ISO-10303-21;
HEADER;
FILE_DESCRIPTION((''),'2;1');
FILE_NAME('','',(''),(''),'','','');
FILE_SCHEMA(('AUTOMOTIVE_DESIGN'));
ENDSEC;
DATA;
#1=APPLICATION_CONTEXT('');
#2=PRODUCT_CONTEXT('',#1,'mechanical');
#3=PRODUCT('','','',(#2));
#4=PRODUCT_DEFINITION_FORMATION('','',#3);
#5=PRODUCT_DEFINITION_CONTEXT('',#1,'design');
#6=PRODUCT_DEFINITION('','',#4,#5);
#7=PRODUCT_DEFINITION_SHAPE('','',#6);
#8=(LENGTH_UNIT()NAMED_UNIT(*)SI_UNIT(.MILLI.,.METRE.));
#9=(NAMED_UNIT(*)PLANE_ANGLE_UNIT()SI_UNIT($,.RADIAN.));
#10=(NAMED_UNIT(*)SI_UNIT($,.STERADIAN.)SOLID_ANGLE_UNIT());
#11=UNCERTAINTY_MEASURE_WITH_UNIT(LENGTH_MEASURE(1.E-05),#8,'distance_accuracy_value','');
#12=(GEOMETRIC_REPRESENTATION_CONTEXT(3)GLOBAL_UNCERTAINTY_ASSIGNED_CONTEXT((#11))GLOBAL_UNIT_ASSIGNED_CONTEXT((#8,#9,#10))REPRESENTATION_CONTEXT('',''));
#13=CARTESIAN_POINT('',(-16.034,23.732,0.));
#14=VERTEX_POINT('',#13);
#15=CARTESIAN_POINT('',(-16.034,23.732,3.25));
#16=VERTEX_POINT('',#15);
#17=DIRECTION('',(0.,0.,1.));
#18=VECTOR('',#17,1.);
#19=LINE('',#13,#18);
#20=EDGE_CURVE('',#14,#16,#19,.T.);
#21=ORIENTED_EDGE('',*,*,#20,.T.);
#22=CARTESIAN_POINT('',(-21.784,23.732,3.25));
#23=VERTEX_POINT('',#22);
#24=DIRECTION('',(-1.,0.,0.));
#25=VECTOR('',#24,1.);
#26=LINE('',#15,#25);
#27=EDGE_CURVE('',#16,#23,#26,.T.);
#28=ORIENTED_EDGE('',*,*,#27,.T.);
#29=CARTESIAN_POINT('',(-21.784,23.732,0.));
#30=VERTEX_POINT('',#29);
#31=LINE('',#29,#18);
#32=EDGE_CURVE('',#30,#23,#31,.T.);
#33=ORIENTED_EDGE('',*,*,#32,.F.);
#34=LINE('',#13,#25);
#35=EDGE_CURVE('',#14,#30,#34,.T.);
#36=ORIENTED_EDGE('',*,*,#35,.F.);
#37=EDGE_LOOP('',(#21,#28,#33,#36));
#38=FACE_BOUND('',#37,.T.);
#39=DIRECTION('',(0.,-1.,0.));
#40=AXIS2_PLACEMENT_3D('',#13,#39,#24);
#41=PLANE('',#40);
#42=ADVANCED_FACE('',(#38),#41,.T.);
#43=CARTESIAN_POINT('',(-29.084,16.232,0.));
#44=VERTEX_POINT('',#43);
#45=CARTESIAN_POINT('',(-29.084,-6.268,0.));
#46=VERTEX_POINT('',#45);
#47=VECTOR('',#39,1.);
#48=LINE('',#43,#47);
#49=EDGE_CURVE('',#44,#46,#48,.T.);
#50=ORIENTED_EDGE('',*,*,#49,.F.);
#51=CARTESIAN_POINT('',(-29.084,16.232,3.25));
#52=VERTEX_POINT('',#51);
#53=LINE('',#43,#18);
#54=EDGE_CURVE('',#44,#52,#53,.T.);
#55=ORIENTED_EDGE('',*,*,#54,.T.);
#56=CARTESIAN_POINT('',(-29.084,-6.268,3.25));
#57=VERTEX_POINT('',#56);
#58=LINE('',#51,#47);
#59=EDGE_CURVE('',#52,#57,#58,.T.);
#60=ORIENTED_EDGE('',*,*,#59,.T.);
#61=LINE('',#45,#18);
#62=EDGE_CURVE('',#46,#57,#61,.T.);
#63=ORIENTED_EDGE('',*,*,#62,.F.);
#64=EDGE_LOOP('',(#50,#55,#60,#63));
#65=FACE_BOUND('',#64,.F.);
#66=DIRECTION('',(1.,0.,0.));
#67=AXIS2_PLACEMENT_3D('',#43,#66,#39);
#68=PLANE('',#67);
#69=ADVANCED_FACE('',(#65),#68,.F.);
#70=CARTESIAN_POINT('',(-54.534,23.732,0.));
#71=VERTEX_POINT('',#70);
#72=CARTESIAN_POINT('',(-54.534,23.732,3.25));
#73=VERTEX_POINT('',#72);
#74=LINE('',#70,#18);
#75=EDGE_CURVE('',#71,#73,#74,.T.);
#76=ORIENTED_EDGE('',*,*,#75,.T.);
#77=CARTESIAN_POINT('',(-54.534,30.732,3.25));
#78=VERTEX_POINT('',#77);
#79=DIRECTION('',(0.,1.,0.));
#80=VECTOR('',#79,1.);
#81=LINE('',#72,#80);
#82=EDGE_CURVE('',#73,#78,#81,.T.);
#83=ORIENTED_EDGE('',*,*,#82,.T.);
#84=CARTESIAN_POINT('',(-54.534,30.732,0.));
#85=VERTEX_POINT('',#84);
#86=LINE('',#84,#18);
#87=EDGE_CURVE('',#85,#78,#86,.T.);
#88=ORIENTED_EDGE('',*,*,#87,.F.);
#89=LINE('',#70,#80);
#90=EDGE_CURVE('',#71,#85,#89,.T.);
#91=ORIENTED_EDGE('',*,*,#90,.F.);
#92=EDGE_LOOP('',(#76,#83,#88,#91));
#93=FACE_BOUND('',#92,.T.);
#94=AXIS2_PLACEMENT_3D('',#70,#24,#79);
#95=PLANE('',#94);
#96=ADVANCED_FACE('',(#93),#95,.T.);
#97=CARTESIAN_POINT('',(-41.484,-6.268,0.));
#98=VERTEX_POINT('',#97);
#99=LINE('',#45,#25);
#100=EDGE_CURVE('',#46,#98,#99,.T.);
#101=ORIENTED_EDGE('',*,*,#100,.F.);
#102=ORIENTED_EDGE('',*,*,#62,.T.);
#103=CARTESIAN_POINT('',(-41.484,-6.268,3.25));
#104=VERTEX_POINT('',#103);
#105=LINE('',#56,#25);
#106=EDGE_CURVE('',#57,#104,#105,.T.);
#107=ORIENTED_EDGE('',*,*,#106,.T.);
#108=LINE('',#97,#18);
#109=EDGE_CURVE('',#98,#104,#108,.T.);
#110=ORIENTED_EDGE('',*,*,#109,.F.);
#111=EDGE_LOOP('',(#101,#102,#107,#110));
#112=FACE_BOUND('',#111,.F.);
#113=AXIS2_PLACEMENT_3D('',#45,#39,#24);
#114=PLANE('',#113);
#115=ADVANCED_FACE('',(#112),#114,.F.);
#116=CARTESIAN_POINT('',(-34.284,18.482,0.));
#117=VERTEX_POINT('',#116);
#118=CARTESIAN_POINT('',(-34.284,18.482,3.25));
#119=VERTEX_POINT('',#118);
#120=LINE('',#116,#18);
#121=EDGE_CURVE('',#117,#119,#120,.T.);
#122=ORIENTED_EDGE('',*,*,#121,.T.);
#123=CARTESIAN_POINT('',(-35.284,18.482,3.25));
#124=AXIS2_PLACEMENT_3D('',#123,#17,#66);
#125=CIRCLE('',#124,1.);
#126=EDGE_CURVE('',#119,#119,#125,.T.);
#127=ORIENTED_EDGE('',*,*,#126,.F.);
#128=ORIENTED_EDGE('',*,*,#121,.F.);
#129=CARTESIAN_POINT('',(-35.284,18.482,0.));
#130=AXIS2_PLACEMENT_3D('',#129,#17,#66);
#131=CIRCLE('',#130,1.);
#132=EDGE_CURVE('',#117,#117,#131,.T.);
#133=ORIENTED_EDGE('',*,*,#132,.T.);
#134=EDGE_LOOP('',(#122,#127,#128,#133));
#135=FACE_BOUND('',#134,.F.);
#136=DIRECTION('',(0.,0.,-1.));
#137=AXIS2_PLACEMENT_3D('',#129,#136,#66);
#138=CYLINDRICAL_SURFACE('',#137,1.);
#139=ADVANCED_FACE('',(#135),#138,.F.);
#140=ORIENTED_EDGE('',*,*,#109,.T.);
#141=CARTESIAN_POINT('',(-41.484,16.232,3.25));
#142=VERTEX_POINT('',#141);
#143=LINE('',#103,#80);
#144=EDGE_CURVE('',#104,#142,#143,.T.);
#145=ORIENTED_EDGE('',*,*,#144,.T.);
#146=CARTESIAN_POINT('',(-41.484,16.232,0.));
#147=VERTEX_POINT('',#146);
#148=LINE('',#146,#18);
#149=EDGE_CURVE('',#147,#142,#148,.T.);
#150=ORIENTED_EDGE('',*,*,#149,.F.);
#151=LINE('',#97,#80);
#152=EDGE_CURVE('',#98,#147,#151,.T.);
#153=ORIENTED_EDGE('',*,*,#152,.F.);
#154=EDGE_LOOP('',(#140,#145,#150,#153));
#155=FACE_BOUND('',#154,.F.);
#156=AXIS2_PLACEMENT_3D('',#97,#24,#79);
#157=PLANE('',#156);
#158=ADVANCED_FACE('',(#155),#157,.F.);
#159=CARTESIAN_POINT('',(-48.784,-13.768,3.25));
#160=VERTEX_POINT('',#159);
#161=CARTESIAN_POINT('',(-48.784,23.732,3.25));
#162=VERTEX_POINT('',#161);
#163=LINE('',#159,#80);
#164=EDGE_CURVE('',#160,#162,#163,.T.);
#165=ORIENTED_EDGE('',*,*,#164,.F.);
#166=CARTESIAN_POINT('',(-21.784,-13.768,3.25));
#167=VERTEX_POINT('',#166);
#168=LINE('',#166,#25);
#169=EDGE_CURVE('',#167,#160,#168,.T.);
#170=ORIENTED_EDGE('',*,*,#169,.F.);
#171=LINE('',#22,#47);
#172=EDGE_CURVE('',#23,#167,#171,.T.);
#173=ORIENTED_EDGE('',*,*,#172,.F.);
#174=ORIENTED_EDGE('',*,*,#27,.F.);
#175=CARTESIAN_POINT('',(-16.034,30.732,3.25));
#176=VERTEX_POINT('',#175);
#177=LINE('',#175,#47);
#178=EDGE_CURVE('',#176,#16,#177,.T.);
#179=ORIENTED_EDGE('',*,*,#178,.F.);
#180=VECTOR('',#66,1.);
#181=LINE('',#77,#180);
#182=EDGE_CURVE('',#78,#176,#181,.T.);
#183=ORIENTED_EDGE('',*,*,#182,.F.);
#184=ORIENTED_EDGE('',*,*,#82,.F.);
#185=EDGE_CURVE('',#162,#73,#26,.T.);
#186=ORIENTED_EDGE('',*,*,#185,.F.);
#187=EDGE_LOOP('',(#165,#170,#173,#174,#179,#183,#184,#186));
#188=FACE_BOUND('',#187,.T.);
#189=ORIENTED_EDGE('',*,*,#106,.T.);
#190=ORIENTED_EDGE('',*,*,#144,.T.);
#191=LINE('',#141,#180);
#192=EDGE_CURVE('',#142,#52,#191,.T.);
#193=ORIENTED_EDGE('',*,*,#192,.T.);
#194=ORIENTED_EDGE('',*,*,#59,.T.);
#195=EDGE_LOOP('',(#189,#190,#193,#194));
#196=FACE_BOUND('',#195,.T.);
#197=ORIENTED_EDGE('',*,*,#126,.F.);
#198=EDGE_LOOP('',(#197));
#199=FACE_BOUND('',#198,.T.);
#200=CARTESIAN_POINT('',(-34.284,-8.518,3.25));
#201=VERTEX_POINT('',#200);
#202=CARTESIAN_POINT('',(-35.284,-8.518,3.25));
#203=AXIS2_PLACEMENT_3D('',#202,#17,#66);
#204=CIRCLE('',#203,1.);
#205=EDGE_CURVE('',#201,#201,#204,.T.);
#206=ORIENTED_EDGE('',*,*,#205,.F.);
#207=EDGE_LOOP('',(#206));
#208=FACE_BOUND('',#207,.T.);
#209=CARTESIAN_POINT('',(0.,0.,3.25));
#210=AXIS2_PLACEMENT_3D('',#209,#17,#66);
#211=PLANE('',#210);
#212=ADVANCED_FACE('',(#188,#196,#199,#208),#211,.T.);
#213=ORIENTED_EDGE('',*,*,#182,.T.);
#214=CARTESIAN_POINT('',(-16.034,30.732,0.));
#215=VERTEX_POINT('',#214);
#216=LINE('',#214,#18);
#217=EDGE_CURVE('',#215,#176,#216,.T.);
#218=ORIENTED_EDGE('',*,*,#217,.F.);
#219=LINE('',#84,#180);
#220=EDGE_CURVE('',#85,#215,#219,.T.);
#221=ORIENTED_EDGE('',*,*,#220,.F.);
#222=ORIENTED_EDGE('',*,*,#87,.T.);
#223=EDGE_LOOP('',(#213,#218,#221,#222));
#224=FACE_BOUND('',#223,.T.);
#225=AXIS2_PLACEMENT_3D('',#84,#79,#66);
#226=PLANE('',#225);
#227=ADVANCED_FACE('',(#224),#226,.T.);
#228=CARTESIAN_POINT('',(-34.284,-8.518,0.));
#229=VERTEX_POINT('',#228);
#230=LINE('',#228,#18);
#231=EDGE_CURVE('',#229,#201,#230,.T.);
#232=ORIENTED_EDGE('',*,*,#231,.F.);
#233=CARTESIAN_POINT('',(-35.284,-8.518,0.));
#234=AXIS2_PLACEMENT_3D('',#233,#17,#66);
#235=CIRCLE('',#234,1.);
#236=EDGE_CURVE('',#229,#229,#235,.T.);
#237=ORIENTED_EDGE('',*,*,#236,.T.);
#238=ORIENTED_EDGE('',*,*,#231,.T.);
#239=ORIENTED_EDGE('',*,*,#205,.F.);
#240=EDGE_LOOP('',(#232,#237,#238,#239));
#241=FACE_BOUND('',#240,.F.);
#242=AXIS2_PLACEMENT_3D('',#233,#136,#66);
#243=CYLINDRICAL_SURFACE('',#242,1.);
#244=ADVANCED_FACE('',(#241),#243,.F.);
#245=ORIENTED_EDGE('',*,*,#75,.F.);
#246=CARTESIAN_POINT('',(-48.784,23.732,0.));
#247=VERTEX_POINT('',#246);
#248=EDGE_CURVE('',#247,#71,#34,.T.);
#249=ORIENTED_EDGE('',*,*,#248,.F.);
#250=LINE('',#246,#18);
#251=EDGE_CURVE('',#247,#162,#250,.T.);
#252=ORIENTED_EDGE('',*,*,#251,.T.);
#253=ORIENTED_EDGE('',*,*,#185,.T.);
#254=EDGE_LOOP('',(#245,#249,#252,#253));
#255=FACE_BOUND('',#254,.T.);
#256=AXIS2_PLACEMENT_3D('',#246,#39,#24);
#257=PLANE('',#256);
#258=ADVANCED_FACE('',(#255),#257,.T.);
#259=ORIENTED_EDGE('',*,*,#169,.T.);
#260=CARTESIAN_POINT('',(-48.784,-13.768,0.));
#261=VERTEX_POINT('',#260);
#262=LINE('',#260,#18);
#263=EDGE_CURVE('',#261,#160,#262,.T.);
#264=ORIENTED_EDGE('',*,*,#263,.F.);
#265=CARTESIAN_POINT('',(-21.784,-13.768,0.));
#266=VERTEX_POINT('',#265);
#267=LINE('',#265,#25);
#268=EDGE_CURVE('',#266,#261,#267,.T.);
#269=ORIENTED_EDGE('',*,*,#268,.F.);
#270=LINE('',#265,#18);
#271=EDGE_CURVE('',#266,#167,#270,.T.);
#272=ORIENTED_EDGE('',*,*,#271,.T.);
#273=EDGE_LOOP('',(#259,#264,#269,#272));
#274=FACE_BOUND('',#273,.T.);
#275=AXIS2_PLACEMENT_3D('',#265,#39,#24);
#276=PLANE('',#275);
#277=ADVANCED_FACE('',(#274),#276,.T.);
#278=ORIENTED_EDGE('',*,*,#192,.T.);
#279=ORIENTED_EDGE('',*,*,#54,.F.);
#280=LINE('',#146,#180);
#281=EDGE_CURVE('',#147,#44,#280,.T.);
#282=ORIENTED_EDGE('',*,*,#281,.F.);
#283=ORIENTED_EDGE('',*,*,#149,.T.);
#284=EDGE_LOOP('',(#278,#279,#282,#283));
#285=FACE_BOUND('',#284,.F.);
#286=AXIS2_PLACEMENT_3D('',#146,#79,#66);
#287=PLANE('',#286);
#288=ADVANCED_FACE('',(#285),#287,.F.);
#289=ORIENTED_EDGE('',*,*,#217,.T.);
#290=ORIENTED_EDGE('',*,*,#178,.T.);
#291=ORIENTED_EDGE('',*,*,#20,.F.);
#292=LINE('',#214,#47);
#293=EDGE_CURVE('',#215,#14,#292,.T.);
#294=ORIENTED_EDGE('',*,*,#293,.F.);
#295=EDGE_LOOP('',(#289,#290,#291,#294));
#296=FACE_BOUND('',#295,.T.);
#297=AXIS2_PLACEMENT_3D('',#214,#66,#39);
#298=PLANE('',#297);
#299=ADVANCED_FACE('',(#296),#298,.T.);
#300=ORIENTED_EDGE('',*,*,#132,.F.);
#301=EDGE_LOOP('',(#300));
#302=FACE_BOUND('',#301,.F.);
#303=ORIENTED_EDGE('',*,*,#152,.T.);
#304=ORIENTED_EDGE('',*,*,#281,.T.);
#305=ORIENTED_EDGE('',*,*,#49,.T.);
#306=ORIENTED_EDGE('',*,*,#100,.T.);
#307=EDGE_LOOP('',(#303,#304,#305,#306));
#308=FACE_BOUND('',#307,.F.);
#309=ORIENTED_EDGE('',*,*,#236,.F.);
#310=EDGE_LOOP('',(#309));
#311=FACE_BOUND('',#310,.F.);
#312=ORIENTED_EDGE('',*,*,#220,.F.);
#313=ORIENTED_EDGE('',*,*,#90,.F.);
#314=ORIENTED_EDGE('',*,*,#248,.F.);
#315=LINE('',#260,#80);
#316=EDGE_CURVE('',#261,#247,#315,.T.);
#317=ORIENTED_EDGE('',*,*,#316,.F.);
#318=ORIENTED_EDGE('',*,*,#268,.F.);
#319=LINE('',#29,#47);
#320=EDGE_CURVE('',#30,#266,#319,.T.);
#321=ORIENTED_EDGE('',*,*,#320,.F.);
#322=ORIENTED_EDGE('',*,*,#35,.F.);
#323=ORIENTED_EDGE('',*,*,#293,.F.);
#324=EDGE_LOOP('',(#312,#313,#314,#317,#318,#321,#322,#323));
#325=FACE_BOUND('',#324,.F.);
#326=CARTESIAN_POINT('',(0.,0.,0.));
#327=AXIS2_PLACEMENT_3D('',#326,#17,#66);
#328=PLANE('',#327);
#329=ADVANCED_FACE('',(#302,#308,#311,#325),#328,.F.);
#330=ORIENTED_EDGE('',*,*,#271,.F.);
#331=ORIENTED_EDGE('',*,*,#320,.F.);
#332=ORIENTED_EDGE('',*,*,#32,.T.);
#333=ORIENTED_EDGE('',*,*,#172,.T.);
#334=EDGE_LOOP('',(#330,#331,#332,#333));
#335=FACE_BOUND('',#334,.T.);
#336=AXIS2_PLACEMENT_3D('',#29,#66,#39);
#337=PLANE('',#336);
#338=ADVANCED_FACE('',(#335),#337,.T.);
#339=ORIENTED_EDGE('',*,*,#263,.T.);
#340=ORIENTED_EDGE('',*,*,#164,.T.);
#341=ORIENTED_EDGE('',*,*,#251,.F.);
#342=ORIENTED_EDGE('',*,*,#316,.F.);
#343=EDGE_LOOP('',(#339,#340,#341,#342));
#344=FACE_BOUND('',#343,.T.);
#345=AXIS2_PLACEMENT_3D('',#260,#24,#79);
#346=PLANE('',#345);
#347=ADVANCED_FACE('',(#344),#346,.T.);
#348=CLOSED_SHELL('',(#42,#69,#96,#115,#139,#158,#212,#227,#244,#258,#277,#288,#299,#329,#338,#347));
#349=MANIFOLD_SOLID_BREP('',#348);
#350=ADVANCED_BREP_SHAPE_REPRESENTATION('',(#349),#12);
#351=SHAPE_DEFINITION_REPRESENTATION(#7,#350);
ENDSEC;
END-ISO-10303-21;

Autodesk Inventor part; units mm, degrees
ref_plane "YZ Plane" through (0, 0, 0) normal (1, 0, 0) x (0, 1, 0)
ref_plane "XZ Plane" through (0, 0, 0) normal (0, 1, 0) x (-1, 0, 0)
ref_plane "XY Plane" through (0, 0, 0) normal (0, 0, 1) x (1, 0, 0)
sketch "Block1" plane through (0, 0, 0) normal (0, 0, 1) x (1, 0, 0)
  circle A0 centre (74.029, 24.2723) radius 1
  line L0 (49.279, 30.4723) -> (71.779, 30.4723)
  line L1 (71.779, 30.4723) -> (71.779, 18.0723)
  line L2 (71.779, 18.0723) -> (49.279, 18.0723)
  line L3 (49.279, 18.0723) -> (49.279, 30.4723)
  line L4 (49.279, 30.4723) -> (44.779, 30.4723)
  line L5 (44.779, 30.4723) -> (44.779, 18.0723)
  line L6 (44.779, 18.0723) -> (49.279, 18.0723)
  line L7 (49.279, 18.0723) -> (49.279, 30.4723)
  line L8 (71.779, 30.4723) -> (76.279, 30.4723)
  line L9 (76.279, 30.4723) -> (76.279, 18.0723)
  line L10 (76.279, 18.0723) -> (71.779, 18.0723)
  line L11 (71.779, 18.0723) -> (71.779, 30.4723)
  line L12 (44.779, 24.2723) -> (76.279, 24.2723) construction
  line L13 (47.029, 30.4723) -> (47.029, 18.0723) construction
  circle A1 centre (47.029, 24.2723) radius 1
  line L14 (74.029, 30.4723) -> (74.029, 18.0723) construction
  point P0 (60.979, 24.0984)
  dimension "d7" = 22.5
  dimension "d8" = 12.4
  dimension "d9" = 4.5
  dimension "d10" = 4.5
  dimension "d11" = 2
  dimension "d12" = 2
sketch "Sketch1" plane through (0, 0, 0) normal (0, 0, 1) x (1, 0, 0)
  line L0 (-54.534, 30.732) -> (-16.034, 30.732)
  line L1 (-16.034, 30.732) -> (-16.034, 23.732)
  line L2 (-16.034, 23.732) -> (-54.534, 23.732)
  line L3 (-54.534, 23.732) -> (-54.534, 30.732)
  line L4 (-92.7646, -8.503) -> (-89.7646, -8.503)
  line L5 (-89.7646, -8.503) -> (-89.7646, -11.753)
  line L6 (-89.7646, -11.753) -> (-92.7646, -11.753)
  line L7 (-92.7646, -11.753) -> (-92.7646, -8.503)
  line L8 (-92.7646, -21.6527) -> (-89.7646, -21.6527)
  line L9 (-89.7646, -21.6527) -> (-89.7646, -21.7527)
  line L10 (-89.7646, -21.7527) -> (-92.7646, -21.7527)
  line L11 (-92.7646, -21.7527) -> (-92.7646, -21.6527)
  line L12 (-48.784, 23.732) -> (-21.784, 23.732)
  line L13 (-21.784, 23.732) -> (-21.784, -13.768)
  line L14 (-21.784, -13.768) -> (-48.784, -13.768)
  line L15 (-48.784, -13.768) -> (-48.784, 23.732)
  line L16 (-35.284, 30.732) -> (-35.284, 23.732) construction
  line L17 (-35.284, -13.768) -> (-35.284, 23.732) construction
  circle A0 centre (-35.284, 18.482) radius 1
  line L18 (-41.484, -6.268) -> (-41.484, 16.232)
  line L19 (-41.484, 16.232) -> (-29.084, 16.232)
  line L20 (-29.084, 16.232) -> (-29.084, -6.268)
  line L21 (-29.084, -6.268) -> (-41.484, -6.268)
  line L22 (-41.484, -6.268) -> (-41.484, -10.768)
  line L23 (-41.484, -10.768) -> (-29.084, -10.768)
  line L24 (-29.084, -10.768) -> (-29.084, -6.268)
  line L25 (-29.084, -6.268) -> (-41.484, -6.268)
  line L26 (-41.484, 16.232) -> (-41.484, 20.732)
  line L27 (-41.484, 20.732) -> (-29.084, 20.732)
  line L28 (-29.084, 20.732) -> (-29.084, 16.232)
  line L29 (-29.084, 16.232) -> (-41.484, 16.232)
  line L30 (-35.284, -10.768) -> (-35.284, 20.732) construction
  line L31 (-41.484, -8.518) -> (-29.084, -8.518) construction
  circle A1 centre (-35.284, -8.518) radius 1
  line L32 (-41.484, 18.482) -> (-29.084, 18.482) construction
  point P0 (0, 0)
  dimension "d0" = 3
  dimension "mat" = 3.25
  dimension "d2" = 3
  dimension "d3" = 0.1
  dimension "d4" = 38.5
  dimension "d6" = 7
  dimension "d15" = 3
  dimension "d17" = 27
  dimension "d19" = 3
  dimension "d20" = 37.5
extrude "Extrusion1" add sketch "Sketch1" along normal blind 3.25 contours L0 L1 L2 L3 | L2 L13 L14 L15 | L21 L24 L23 L22 | L26 L27 L28 L19
equation "\"d21\" = mat"
properties part number "arm-servo"
